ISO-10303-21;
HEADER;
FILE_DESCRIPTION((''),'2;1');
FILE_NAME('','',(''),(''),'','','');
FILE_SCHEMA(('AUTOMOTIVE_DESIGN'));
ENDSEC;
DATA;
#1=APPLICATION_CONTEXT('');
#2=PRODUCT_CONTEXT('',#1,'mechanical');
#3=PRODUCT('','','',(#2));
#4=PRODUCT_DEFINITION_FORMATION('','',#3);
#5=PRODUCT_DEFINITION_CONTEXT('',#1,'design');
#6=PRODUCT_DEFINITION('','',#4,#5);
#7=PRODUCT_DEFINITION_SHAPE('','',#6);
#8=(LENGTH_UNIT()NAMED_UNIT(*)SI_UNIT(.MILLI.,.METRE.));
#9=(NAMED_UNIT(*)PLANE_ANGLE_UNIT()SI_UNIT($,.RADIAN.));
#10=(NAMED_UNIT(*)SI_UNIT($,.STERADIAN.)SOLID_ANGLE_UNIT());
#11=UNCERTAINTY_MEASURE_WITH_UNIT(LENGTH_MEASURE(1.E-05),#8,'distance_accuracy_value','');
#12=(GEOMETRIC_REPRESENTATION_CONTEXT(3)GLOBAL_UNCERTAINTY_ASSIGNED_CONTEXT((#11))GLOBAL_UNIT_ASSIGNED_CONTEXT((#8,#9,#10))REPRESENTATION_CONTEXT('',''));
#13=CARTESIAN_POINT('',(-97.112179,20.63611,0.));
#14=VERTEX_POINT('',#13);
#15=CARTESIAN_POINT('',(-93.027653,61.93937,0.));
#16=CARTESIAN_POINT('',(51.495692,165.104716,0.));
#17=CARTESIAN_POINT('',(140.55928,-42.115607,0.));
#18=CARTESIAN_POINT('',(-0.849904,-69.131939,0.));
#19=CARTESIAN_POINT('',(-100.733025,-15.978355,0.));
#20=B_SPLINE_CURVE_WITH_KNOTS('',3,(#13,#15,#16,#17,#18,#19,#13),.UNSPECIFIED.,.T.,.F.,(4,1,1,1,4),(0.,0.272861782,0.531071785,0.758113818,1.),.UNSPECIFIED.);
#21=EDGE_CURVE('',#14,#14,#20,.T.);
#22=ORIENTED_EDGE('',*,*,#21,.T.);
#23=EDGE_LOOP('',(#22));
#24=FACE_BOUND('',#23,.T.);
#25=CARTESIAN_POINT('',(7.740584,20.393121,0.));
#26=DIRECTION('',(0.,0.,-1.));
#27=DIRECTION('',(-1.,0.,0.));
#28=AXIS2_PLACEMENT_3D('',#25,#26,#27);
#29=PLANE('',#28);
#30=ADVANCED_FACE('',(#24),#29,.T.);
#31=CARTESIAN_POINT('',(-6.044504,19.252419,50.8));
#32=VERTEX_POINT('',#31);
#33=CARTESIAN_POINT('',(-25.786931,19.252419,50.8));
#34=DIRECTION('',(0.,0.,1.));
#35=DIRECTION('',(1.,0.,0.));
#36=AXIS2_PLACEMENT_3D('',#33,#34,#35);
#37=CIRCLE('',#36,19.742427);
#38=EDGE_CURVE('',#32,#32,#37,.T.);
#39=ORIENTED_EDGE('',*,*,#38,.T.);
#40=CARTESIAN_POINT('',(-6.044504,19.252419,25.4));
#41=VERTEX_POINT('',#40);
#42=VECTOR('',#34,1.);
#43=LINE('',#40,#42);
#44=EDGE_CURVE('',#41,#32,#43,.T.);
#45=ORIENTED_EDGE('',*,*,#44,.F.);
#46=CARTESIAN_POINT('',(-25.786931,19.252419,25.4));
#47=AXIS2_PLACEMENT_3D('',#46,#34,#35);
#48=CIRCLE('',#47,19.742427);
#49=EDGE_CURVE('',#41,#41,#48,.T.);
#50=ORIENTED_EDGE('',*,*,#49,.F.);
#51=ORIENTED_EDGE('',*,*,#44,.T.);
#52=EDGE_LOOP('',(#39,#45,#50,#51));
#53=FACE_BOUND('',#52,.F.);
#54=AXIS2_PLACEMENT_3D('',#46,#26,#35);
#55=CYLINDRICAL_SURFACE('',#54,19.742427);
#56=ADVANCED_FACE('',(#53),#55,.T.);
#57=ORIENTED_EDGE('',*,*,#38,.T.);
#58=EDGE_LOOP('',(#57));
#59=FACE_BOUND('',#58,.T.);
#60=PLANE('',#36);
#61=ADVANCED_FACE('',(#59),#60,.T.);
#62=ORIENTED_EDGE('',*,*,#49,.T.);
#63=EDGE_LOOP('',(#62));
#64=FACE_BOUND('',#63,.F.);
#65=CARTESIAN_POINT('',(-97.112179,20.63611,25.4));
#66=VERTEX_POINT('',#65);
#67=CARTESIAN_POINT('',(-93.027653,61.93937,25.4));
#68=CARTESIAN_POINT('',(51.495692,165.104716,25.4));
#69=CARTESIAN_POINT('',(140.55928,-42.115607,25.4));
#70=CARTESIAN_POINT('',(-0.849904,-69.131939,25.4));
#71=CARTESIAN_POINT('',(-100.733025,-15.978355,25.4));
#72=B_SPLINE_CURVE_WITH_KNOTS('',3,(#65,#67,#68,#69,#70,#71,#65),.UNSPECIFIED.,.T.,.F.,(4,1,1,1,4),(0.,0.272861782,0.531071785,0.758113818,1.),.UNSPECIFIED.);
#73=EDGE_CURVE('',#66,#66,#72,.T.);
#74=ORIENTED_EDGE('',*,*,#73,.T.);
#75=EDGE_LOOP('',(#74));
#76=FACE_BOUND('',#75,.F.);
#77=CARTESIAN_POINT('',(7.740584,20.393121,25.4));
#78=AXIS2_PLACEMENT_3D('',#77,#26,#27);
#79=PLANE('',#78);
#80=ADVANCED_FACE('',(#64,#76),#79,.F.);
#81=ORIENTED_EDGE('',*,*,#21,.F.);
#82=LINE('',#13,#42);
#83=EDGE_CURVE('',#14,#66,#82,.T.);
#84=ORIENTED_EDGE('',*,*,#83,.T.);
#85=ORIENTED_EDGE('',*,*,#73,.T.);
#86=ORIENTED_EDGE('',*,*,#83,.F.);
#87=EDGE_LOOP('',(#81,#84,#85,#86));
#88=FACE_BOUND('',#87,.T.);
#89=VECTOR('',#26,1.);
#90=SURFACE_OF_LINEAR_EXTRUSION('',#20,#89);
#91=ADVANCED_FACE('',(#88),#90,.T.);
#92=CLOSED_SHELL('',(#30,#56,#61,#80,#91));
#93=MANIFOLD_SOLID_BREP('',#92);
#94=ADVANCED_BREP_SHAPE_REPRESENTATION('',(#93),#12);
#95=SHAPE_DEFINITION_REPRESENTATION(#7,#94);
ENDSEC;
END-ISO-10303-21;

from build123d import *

# Parameters (mm, degrees)
F1_DEPTH = 25.4
F2_R     = 19.7424268159
F3_DEPTH = 25.4


with BuildPart() as f1:
    # F0 (on Top) → F1 (new body)
    with BuildSketch(Plane.XY):
        with BuildLine():
            add(Edge.make_bspline(
                [(-97.1121788025, 20.6361096352), (-93.0276525884, 61.9393701555), (51.4956922911, 165.1047163075), (140.5592801262, -42.1156070839), (-0.8499035212, -69.1319386587), (-100.7330246446, -15.9783546332), (-97.1121788025, 20.6361096352)],
                knots=[0, 0, 0, 0, 0.2728617823, 0.5310717847, 0.7581138183, 1, 1, 1, 1], degree=3))
        make_face()
    extrude(amount=F1_DEPTH)

    # F2 (on face) → F3 (join)
    with BuildSketch(Plane.XY.offset(25.4)):
        with Locations((-25.7869306952, 19.2524194717)):
            Circle(F2_R)
    extrude(amount=F3_DEPTH)


solid = f1.part
